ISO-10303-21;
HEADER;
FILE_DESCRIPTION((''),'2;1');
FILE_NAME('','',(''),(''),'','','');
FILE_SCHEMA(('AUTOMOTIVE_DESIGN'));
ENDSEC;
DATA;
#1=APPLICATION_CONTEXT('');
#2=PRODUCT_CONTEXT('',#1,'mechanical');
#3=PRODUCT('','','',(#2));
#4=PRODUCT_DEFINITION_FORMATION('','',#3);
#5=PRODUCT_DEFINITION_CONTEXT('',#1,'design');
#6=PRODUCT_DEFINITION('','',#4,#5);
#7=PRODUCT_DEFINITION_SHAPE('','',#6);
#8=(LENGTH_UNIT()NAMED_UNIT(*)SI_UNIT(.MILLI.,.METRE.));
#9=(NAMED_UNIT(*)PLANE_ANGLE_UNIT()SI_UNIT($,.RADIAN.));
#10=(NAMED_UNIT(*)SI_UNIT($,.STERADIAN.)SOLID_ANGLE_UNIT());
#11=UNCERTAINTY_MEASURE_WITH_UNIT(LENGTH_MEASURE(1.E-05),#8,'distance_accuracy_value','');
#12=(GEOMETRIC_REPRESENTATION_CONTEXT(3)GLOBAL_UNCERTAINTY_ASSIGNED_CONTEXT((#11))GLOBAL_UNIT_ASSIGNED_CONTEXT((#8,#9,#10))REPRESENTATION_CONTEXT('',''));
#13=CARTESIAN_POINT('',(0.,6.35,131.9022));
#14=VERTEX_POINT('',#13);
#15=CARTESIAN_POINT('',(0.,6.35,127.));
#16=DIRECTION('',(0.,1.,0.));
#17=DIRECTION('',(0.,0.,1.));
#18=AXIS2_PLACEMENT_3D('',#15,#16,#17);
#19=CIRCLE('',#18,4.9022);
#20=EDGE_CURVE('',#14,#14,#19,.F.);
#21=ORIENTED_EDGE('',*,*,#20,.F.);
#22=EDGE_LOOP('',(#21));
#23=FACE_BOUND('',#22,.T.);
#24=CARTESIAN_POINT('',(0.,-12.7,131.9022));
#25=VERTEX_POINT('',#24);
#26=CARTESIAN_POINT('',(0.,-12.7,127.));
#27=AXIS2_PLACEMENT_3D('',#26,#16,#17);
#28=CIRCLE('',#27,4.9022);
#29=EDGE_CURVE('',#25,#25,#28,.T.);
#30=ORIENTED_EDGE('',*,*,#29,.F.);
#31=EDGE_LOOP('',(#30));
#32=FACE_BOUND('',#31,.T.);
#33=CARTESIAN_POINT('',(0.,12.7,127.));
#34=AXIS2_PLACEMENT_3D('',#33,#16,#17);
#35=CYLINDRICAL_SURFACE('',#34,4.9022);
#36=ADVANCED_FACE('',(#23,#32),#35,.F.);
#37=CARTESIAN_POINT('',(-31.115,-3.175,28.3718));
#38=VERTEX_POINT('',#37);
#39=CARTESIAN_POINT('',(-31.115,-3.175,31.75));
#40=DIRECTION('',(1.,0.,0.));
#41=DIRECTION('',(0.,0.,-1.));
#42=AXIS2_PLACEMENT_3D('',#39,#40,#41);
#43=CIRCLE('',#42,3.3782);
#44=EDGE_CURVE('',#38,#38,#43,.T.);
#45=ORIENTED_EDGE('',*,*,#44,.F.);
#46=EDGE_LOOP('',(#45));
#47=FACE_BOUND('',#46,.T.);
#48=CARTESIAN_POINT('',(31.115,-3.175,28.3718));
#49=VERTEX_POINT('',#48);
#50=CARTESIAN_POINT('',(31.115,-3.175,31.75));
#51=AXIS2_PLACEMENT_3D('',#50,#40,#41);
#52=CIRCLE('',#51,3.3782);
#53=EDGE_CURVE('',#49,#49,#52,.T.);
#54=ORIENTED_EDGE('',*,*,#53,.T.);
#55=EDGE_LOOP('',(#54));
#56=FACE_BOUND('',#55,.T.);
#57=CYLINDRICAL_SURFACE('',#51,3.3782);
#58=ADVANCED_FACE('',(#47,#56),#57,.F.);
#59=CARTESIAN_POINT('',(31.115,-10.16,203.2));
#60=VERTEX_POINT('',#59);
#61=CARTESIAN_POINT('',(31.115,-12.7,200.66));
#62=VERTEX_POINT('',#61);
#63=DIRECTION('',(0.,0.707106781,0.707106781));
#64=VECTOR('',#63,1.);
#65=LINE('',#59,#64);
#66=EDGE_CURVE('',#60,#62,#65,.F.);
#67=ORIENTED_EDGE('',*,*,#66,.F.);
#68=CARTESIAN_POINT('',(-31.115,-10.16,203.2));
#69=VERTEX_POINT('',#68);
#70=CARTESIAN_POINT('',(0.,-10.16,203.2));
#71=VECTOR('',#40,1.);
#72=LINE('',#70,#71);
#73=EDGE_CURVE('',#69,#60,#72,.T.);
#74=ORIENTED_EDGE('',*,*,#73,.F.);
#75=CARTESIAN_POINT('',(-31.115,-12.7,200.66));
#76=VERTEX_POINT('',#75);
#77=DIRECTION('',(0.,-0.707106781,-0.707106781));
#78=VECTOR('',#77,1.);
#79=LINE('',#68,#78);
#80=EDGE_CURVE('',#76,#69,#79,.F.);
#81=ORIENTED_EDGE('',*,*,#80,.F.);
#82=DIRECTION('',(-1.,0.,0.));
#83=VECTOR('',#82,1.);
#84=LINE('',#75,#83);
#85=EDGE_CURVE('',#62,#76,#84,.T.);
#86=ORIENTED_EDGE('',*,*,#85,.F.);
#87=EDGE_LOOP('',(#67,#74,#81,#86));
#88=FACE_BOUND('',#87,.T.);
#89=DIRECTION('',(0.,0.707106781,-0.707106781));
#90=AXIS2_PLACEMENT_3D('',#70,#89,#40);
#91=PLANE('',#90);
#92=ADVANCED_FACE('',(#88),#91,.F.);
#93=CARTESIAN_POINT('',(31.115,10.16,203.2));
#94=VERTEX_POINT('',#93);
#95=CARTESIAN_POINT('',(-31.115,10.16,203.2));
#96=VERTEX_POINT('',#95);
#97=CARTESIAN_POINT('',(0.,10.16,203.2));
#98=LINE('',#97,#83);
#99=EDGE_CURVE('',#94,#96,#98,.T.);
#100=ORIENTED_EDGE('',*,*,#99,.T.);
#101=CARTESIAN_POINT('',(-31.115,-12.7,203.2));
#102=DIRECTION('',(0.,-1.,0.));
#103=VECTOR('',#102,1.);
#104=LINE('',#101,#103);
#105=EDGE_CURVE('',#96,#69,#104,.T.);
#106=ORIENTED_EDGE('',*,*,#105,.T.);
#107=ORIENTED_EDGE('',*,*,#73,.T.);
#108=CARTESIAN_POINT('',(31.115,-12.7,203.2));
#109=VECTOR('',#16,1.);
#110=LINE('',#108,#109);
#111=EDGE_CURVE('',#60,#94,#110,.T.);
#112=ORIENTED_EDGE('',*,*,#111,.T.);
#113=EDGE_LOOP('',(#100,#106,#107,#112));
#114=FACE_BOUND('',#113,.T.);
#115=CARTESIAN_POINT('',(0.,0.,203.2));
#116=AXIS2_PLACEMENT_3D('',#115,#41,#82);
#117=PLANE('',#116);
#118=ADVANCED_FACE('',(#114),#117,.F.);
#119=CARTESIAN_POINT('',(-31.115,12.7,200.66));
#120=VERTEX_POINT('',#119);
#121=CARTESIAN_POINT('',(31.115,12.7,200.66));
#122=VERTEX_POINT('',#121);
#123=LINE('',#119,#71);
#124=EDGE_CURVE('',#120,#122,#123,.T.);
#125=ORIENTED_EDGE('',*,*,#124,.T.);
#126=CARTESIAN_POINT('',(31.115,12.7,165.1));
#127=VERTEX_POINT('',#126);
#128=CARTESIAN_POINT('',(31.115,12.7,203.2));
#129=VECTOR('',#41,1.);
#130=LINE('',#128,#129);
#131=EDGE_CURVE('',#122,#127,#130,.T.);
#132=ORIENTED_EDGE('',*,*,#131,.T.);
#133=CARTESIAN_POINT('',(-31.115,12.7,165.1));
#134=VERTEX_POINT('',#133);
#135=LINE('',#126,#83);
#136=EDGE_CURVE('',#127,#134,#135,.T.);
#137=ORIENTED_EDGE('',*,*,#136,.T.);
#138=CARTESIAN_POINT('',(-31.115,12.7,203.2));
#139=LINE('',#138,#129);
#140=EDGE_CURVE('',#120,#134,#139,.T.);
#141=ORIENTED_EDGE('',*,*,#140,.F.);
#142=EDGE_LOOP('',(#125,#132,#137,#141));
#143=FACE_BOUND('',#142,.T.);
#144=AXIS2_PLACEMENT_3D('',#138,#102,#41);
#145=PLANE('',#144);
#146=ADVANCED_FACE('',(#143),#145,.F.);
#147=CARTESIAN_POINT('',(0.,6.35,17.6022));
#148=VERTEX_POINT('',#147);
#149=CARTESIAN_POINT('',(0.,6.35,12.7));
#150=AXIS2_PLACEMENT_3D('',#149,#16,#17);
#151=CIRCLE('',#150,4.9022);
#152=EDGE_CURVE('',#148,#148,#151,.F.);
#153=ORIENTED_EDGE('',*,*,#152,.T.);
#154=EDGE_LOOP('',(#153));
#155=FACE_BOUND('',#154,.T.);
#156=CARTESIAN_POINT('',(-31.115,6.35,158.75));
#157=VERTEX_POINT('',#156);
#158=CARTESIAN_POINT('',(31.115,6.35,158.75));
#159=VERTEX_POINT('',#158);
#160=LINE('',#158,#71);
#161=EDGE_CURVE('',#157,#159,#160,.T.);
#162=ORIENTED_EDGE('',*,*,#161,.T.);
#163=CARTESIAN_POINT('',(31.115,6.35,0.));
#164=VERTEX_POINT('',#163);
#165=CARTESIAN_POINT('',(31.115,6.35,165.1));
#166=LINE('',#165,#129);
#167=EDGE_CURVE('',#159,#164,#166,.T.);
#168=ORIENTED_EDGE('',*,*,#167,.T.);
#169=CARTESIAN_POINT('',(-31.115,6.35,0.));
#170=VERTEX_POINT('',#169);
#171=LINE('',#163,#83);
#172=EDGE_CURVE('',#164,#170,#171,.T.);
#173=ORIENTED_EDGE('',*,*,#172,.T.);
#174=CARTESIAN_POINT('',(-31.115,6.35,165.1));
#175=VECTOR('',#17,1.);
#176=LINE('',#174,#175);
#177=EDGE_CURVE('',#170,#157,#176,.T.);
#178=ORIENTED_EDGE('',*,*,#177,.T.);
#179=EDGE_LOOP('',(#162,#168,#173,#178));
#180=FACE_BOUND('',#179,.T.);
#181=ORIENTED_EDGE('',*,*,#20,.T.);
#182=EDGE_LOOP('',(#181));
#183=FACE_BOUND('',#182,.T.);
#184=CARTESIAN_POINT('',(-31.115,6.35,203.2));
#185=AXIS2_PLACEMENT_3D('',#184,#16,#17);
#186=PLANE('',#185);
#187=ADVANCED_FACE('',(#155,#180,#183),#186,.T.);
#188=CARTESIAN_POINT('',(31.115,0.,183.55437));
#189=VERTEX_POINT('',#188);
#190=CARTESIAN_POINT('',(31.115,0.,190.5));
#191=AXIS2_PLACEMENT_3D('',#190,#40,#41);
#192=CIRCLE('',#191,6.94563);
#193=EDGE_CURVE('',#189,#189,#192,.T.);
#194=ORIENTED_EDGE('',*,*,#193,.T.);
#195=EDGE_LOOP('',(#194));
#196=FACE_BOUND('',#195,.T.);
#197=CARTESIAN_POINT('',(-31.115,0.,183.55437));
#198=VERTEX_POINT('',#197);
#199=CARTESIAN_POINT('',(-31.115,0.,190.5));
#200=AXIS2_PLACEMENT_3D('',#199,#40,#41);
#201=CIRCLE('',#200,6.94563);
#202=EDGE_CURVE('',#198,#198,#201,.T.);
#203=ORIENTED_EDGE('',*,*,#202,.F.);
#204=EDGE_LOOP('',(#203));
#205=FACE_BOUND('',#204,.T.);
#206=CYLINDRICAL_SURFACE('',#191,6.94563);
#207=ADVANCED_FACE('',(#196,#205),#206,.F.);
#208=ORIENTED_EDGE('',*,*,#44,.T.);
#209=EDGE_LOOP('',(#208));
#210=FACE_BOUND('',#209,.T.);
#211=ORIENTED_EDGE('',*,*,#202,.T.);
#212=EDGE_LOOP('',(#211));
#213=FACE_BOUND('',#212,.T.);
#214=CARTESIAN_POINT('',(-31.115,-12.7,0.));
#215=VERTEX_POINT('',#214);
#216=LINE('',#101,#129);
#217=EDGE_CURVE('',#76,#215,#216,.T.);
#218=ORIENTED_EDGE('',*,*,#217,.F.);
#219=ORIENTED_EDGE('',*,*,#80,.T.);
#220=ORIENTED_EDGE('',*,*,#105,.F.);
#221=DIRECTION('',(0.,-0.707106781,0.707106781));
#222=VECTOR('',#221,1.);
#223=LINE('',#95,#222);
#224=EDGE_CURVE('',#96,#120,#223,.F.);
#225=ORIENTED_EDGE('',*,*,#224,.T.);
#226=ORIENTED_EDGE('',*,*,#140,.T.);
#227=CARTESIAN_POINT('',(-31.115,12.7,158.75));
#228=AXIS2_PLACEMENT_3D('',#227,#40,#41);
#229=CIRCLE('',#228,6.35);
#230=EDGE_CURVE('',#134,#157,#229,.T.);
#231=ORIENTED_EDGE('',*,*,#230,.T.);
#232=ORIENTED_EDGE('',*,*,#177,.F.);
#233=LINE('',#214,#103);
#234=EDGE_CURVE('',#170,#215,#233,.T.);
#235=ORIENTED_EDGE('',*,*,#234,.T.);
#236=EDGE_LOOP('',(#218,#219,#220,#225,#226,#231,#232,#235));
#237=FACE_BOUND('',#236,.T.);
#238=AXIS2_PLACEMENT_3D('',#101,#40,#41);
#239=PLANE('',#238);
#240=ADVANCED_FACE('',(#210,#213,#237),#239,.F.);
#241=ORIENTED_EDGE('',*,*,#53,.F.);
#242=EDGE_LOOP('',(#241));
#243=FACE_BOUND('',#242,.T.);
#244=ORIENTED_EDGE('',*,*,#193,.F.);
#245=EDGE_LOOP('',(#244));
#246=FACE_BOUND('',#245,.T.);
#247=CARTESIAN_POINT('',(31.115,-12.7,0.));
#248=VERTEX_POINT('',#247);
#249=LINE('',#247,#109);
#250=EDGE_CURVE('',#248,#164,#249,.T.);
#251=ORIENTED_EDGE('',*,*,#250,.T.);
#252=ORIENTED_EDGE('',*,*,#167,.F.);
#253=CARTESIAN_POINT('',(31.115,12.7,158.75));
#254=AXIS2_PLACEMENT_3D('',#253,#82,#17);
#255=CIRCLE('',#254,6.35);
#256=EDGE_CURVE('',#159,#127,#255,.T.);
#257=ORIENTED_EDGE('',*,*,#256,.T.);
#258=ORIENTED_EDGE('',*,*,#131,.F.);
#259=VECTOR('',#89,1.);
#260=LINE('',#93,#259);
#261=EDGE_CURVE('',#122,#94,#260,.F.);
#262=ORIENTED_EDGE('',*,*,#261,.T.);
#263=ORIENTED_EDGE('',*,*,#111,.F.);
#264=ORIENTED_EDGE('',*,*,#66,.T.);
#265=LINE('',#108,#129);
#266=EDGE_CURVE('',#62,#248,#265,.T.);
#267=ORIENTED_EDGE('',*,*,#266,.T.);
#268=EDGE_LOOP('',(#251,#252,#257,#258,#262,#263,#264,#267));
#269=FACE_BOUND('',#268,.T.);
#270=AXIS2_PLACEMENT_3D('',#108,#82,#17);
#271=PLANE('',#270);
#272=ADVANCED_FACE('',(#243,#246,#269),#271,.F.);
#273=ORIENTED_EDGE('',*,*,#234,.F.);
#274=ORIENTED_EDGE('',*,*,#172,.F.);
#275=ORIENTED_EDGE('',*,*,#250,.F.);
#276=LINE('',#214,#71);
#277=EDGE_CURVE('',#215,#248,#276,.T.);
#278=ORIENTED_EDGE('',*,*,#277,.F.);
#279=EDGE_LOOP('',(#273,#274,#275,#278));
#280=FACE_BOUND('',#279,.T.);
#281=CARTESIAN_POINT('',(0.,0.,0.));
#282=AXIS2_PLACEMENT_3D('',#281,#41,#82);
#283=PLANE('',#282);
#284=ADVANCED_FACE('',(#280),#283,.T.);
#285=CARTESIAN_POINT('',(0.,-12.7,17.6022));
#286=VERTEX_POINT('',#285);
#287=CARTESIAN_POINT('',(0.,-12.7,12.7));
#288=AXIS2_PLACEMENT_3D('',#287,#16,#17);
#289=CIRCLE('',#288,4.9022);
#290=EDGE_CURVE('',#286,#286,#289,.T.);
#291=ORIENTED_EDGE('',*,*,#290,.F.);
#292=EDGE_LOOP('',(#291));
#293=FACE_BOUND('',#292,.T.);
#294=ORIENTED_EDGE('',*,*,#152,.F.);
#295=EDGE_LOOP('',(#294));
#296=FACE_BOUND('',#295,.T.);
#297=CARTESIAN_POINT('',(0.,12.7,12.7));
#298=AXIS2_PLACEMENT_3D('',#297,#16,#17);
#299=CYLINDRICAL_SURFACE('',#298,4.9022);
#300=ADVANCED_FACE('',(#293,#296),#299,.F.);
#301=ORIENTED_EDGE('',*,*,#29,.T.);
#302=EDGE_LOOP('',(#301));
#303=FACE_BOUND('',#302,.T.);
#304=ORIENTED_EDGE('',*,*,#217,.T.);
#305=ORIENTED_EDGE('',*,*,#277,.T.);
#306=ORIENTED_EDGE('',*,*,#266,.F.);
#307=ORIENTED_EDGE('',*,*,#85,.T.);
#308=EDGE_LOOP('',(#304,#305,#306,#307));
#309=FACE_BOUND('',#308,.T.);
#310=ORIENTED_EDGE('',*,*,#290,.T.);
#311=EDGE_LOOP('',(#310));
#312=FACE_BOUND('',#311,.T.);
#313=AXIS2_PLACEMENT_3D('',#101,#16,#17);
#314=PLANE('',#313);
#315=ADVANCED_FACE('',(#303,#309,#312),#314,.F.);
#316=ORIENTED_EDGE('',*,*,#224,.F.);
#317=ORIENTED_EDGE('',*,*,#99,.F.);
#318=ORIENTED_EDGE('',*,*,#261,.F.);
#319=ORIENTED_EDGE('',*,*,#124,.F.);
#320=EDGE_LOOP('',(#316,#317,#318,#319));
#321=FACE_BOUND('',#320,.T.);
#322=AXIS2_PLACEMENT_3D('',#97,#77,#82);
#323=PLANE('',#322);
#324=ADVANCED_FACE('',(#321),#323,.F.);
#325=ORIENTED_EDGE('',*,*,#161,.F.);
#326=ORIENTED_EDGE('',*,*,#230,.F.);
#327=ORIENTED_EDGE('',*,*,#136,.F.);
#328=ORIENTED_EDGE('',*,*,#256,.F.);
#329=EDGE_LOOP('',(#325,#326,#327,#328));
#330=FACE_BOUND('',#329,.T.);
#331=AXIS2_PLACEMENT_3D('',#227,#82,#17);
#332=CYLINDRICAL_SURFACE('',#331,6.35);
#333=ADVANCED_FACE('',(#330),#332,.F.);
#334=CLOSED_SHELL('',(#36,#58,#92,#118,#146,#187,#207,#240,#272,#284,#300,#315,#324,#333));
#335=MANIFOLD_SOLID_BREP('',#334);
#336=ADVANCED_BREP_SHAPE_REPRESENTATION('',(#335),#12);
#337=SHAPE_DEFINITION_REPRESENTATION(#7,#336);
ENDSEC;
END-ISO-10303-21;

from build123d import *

# Parameters (mm, degrees)
SKETCH1_W               = 62.23
SKETCH1_H               = 25.4
BOSS_EXTRUDE1_DEPTH     = 203.2
F_3_8_CLEARANCE_HOLE1_D = 9.8044
F_1_2_CLEARANCE_HOLE1_D = 13.89126
SKETCH16_W              = 62.23
SKETCH16_H              = 165.1
CUT_EXTRUDE2_DEPTH      = 6.35
FILLET1_R               = 6.35
CHAMFER1_SIZE           = 2.54
F_1_4_CLEARANCE_HOLE1_D = 6.7564


with BuildPart() as part:
    # Sketch1 → Boss-Extrude1 (new body)
    with BuildSketch(Plane.XY):
        Rectangle(SKETCH1_W, SKETCH1_H)
    extrude(amount=BOSS_EXTRUDE1_DEPTH)

    # 3/8 Clearance Hole1 (through all)
    with Locations(Plane(origin=(0, 12.7, 0), x_dir=(1, 0, 0), z_dir=(0, 1, 0))):
        with Locations((0, -12.7), (0, -127)):
            Hole(F_3_8_CLEARANCE_HOLE1_D / 2)

    # 1/2 Clearance Hole1 (through all)
    with Locations(Plane(origin=(31.115, 0, 0), x_dir=(0, 0, -1), z_dir=(1, 0, 0))):
        with Locations((-190.5, 0)):
            Hole(F_1_2_CLEARANCE_HOLE1_D / 2)

    # Sketch16 → Cut-Extrude2 (cut)
    with BuildSketch(Plane.XZ.offset(-12.7)):
        with Locations((0, 82.55)):
            Rectangle(SKETCH16_W, SKETCH16_H)
    extrude(amount=CUT_EXTRUDE2_DEPTH, mode=Mode.SUBTRACT)

    # Fillet1
    fillet1_edges = [part.edges().sort_by_distance(p)[0] for p in [
        (0, 6.35, 165.1),
    ]]
    fillet(fillet1_edges, radius=FILLET1_R - 0.0001)  # a hair under: the kernel refuses the full size

    # Chamfer1
    chamfer1_edges = [part.edges().sort_by_distance(p)[0] for p in [
        (0, -12.7, 203.2),
        (0, 12.7, 203.2),
    ]]
    chamfer(chamfer1_edges, length=CHAMFER1_SIZE)

    # 1/4 Clearance Hole1 (through all)
    with Locations(Plane(origin=(31.115, 0, 0), x_dir=(0, 0, -1), z_dir=(1, 0, 0))):
        with Locations((-31.75, -3.175)):
            Hole(F_1_4_CLEARANCE_HOLE1_D / 2)


solid = part.part
